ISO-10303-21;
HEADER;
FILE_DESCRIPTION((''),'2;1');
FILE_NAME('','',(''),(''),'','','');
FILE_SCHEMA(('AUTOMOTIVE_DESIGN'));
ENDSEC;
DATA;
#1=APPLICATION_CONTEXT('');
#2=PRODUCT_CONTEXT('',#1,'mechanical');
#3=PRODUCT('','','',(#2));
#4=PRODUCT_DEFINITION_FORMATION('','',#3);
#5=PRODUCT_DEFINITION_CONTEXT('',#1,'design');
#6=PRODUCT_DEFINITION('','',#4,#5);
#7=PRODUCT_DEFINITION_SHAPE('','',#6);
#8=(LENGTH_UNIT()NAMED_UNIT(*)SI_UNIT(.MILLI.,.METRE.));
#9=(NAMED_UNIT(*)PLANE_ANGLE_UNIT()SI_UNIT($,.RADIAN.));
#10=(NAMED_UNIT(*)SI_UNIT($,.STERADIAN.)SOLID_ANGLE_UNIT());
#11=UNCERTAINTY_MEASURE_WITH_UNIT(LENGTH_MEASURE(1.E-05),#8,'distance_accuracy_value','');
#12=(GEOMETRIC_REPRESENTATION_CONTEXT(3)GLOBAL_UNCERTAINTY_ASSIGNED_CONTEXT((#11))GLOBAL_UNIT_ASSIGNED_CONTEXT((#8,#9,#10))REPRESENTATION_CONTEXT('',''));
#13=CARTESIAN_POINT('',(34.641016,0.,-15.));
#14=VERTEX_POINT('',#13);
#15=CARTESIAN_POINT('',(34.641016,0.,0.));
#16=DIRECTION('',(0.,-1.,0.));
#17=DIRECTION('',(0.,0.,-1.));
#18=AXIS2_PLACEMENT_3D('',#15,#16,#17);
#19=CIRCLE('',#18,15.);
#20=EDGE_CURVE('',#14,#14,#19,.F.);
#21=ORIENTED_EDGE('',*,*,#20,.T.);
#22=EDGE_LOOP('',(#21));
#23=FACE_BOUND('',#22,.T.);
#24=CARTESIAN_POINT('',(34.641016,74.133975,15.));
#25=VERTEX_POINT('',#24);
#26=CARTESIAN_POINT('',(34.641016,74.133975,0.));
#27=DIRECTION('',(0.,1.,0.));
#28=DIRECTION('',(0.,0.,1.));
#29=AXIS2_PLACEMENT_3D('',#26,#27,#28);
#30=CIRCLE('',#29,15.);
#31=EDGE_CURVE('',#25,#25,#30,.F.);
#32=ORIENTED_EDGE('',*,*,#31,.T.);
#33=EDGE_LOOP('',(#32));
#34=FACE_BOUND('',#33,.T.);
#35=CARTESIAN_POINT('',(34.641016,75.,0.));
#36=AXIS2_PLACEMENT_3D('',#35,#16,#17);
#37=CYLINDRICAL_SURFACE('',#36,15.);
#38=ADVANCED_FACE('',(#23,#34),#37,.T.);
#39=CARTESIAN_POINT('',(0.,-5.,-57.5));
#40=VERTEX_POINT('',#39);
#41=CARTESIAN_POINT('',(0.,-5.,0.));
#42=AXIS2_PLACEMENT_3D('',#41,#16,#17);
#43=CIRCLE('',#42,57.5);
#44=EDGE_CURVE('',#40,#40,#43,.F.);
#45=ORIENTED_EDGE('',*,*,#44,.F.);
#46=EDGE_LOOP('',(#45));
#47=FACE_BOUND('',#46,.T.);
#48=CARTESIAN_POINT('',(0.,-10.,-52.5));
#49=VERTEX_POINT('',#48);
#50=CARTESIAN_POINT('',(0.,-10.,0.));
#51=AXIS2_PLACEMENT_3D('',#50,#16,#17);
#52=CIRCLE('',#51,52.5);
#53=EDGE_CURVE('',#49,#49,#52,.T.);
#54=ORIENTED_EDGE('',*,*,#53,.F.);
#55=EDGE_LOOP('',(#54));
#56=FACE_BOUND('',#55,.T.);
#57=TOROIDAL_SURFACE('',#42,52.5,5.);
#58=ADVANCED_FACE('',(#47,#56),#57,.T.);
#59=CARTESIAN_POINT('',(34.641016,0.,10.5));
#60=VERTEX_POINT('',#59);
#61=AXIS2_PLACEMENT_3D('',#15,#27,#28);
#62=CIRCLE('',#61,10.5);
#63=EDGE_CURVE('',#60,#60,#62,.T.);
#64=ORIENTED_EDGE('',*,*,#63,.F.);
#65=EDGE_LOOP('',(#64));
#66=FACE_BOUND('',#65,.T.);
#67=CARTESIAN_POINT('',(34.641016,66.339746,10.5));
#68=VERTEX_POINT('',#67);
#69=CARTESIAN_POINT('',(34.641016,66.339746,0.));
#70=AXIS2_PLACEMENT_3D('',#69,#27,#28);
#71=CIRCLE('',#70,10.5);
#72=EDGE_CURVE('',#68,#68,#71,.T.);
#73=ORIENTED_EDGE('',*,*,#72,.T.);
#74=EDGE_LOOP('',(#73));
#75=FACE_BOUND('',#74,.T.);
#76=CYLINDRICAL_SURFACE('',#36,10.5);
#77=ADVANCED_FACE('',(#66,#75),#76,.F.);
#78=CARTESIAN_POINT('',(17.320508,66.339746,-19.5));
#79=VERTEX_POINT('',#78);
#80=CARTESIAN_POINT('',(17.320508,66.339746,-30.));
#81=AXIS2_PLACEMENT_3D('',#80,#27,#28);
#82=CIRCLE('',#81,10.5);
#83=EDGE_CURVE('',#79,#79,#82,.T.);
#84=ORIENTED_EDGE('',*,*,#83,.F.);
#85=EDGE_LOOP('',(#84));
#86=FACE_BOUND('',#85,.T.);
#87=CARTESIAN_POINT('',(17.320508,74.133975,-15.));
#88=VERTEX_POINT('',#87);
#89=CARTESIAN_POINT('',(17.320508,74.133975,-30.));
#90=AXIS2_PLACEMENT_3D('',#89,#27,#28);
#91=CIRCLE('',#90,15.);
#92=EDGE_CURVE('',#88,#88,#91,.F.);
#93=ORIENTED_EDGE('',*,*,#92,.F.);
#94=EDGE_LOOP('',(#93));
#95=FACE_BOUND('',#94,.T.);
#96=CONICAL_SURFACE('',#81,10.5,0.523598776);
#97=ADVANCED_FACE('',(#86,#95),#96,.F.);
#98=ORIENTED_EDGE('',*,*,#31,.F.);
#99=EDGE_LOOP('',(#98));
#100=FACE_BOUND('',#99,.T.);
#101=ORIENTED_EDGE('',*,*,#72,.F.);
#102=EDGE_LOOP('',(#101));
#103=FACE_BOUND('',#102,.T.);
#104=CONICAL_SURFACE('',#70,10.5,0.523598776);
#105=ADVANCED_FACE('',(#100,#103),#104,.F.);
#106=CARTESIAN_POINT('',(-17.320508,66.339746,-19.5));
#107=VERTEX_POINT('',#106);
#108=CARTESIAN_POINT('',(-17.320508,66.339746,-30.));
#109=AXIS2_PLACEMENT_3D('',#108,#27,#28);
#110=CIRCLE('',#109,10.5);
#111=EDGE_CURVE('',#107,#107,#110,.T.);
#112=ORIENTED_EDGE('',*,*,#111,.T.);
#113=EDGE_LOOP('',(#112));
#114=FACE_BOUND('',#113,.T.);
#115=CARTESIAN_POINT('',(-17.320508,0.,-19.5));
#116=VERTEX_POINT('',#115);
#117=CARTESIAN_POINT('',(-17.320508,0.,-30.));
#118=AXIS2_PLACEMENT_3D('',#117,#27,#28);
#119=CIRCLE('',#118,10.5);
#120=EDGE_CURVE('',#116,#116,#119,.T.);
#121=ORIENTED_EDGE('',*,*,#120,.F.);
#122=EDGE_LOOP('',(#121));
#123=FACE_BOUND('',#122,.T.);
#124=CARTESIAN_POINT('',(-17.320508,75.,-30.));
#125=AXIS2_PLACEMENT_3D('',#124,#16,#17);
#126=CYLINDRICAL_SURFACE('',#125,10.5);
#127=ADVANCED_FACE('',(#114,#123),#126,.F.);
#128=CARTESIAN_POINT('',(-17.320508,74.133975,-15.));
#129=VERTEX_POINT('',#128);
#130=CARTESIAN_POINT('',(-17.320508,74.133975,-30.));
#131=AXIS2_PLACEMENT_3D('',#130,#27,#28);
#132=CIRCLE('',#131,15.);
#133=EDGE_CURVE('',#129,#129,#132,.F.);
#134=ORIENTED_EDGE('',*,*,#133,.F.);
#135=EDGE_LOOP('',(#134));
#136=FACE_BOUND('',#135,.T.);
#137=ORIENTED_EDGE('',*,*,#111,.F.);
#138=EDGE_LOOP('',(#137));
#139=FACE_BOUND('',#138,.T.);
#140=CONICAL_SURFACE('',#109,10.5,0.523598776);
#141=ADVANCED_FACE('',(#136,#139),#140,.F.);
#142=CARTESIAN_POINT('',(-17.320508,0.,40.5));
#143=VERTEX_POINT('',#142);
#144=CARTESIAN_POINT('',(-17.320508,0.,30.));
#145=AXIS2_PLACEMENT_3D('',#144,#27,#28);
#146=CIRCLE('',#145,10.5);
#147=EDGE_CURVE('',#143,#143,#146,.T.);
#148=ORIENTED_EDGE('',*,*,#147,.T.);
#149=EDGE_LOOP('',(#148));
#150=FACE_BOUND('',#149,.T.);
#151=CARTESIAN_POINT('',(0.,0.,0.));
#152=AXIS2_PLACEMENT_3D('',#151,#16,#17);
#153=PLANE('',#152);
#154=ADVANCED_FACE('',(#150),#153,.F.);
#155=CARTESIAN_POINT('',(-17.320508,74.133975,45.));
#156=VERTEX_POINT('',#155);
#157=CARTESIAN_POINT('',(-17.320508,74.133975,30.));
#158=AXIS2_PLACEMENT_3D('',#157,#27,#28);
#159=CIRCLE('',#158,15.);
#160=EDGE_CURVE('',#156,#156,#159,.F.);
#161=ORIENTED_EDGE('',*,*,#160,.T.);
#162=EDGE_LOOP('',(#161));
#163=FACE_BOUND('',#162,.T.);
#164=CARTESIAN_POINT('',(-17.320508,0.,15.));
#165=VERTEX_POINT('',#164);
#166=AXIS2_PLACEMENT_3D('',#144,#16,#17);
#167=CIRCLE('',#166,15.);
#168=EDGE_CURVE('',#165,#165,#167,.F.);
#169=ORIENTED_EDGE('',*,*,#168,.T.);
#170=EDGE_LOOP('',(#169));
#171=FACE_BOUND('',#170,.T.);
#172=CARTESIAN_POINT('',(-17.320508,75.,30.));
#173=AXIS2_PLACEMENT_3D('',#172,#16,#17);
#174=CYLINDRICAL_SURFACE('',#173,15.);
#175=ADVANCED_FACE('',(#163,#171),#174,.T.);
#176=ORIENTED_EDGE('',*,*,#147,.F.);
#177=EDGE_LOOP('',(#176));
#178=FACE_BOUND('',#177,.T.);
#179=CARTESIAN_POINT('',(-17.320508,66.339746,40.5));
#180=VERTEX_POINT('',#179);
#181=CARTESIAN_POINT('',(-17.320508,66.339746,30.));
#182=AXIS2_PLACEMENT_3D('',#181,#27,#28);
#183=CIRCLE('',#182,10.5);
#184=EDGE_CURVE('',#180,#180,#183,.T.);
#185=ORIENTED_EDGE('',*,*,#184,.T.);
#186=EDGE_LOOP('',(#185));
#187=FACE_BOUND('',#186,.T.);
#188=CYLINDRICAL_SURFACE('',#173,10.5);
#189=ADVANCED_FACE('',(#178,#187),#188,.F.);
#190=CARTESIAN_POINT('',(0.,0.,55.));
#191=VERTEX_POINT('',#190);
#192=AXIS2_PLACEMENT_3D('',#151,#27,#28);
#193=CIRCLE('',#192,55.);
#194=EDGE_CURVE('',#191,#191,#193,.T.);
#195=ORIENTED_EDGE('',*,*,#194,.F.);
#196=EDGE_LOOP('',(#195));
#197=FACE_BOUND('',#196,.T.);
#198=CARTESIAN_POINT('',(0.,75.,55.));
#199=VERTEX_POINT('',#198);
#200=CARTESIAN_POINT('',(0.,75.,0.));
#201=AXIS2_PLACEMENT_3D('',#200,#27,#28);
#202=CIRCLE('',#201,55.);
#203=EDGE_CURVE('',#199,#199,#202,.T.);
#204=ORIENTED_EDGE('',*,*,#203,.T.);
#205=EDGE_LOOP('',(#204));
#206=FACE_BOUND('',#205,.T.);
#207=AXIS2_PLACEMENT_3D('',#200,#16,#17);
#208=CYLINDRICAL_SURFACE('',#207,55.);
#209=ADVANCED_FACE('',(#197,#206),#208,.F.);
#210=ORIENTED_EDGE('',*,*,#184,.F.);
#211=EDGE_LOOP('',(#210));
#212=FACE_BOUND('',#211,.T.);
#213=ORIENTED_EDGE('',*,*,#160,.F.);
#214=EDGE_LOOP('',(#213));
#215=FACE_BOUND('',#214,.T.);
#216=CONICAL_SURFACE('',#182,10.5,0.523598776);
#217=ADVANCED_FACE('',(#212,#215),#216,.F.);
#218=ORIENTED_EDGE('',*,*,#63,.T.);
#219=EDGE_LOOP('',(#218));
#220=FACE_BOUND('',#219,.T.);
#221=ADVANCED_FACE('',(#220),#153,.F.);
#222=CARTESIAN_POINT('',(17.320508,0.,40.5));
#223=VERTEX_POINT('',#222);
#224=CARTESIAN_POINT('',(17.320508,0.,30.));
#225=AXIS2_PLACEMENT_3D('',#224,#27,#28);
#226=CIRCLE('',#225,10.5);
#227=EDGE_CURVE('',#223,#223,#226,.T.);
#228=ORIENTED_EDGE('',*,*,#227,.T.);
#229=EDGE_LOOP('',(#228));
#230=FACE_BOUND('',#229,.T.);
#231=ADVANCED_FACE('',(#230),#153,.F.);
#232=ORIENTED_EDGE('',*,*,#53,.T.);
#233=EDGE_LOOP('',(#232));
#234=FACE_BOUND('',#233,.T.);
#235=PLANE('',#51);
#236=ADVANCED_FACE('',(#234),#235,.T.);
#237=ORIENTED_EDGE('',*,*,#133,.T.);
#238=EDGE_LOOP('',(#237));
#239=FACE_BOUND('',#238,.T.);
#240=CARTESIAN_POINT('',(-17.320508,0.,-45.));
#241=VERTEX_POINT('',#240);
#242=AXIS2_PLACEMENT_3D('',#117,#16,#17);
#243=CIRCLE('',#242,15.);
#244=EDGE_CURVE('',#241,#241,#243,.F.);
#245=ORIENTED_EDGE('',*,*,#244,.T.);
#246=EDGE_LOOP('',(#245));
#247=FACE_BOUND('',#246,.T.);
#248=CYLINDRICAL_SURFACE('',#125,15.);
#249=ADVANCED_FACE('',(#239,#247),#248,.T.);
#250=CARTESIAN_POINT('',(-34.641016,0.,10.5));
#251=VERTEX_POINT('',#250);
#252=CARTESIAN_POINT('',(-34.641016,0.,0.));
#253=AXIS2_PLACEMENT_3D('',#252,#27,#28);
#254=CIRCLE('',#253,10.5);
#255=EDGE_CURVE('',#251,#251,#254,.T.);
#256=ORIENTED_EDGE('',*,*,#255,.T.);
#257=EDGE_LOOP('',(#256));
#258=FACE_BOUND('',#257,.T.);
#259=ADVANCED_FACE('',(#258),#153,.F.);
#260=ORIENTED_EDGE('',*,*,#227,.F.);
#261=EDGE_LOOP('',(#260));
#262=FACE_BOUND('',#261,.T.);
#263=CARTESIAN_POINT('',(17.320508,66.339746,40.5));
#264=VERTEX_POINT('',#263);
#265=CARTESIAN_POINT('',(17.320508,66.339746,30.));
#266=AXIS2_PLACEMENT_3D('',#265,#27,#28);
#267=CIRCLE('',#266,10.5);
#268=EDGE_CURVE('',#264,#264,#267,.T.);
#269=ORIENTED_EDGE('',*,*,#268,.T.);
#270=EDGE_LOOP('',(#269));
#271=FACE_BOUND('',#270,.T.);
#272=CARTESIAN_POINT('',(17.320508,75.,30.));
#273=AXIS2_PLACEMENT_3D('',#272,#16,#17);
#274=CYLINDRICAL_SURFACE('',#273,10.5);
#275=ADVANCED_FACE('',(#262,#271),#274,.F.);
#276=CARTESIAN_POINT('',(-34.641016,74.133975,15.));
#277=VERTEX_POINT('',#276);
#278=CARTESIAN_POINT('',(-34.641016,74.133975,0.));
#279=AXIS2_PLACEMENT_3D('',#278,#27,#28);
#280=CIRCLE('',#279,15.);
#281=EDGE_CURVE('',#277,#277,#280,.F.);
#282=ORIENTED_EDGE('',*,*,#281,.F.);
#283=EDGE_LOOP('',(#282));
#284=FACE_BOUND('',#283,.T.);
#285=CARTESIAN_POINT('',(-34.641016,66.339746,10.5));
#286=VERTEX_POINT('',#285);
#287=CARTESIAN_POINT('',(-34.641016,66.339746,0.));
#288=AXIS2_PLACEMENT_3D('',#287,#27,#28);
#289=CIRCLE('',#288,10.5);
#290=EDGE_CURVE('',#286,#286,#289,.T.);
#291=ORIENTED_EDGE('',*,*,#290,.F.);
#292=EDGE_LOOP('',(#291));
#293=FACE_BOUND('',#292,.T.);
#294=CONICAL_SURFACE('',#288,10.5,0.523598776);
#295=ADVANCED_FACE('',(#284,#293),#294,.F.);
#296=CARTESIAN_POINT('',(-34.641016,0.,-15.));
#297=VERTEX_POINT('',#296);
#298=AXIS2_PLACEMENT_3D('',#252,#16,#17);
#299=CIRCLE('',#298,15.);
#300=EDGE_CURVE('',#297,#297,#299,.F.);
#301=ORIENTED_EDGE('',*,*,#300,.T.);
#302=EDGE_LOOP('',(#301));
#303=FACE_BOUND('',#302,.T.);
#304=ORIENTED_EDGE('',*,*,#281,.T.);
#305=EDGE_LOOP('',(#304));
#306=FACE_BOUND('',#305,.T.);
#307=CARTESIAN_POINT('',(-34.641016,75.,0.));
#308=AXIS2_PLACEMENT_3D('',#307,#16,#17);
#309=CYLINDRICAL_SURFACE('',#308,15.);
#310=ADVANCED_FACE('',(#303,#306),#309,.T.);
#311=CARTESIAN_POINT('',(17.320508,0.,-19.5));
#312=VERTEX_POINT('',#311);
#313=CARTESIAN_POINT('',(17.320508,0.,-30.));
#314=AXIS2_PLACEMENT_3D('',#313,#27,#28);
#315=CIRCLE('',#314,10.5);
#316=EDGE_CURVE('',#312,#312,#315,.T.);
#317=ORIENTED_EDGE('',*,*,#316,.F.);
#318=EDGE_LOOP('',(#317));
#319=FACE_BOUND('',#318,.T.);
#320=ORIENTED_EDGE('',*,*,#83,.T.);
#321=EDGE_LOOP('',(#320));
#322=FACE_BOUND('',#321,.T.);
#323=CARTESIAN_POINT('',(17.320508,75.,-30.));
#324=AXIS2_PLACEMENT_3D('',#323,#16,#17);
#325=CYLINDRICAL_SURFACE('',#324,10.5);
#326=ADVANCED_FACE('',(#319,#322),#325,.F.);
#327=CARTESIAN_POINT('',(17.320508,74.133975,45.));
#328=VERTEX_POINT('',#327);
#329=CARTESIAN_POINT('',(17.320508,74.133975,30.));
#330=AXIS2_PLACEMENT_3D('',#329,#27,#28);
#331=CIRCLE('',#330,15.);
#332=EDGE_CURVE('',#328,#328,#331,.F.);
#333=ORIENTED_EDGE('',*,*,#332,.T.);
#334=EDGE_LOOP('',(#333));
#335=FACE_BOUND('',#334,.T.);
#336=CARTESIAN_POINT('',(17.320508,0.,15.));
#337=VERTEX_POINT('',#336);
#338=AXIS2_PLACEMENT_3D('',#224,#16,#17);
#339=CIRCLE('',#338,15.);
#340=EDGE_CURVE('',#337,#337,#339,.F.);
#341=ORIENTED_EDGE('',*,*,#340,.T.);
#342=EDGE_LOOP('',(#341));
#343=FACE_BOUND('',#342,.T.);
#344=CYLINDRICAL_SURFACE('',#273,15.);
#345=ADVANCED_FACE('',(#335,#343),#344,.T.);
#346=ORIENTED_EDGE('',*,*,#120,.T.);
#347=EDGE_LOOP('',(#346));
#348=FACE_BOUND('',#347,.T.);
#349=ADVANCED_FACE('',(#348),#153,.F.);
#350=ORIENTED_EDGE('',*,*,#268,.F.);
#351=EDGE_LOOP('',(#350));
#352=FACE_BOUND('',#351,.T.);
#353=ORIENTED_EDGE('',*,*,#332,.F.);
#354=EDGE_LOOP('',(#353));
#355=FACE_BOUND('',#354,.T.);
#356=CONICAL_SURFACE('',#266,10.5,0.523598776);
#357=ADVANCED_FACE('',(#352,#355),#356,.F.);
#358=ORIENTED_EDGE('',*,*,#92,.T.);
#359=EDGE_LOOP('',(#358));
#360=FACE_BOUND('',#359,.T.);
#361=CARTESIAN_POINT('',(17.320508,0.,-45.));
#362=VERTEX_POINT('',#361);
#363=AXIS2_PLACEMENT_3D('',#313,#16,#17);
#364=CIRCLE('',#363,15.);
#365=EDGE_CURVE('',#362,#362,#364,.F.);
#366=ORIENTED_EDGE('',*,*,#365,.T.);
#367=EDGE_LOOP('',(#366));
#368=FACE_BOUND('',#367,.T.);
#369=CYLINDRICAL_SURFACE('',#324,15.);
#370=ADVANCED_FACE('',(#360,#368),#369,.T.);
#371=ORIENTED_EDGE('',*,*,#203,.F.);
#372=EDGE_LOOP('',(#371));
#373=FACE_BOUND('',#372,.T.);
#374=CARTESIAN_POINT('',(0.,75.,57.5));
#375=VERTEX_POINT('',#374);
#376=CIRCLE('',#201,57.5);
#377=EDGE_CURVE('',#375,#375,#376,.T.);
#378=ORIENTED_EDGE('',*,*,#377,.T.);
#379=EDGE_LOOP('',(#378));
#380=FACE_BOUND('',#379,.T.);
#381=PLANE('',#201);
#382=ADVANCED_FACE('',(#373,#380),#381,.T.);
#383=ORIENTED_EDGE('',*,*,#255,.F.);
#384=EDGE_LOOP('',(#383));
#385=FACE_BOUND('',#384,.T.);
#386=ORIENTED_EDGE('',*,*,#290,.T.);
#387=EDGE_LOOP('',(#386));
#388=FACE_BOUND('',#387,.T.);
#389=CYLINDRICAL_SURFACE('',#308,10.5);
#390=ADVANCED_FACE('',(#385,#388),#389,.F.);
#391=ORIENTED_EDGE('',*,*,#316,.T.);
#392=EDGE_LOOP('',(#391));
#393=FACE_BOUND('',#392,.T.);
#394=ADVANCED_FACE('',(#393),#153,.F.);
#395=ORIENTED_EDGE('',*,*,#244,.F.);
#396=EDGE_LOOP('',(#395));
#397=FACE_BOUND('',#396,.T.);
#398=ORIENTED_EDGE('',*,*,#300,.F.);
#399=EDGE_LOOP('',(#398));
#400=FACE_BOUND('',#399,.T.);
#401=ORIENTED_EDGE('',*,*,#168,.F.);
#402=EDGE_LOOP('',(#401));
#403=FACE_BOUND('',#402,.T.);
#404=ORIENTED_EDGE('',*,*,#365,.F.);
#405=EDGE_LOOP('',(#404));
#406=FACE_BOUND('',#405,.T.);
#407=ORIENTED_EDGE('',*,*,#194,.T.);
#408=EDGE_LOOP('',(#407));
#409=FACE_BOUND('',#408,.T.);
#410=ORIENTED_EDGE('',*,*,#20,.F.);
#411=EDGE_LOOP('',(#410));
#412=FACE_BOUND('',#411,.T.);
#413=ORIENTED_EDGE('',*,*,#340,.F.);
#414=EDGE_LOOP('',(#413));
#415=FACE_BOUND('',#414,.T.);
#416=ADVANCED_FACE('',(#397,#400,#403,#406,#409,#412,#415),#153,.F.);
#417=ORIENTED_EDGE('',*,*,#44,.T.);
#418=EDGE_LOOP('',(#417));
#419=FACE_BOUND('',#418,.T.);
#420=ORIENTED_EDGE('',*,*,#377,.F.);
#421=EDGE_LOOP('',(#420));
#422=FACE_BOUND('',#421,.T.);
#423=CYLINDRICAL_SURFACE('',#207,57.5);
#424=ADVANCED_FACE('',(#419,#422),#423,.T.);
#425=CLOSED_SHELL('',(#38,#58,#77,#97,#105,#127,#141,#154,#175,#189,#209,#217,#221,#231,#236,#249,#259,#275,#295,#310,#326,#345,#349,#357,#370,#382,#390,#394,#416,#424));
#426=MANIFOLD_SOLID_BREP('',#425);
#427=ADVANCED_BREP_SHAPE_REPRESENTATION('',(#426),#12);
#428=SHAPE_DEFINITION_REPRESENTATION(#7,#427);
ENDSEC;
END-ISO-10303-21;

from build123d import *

# Parameters (mm, degrees)
SKETCH2_R             = 15
SKETCH2_R_2           = 10.5
BOSS_EXTRUDE1_DEPTH   = 75
BOSS_EXTRUDE1_2_DEPTH = 75
BOSS_EXTRUDE1_3_DEPTH = 75
BOSS_EXTRUDE1_4_DEPTH = 75
BOSS_EXTRUDE1_5_DEPTH = 75
BOSS_EXTRUDE1_6_DEPTH = 75
SKETCH2_R_3           = 57.5
SKETCH2_R_4           = 55
BOSS_EXTRUDE1_7_DEPTH = 75
SKETCH3_R             = 57.5
BOSS_EXTRUDE2_DEPTH   = 10
CHAMFER2_SIZE         = 5
CHAMFER2_SIZE_2       = 8.660254038
FILLET1_R             = 5


with BuildPart() as part:
    # Sketch2 → Boss-Extrude1 (new body)
    with BuildSketch(Plane(origin=(0, 0, 0), x_dir=(1, 0, 0), z_dir=(0, 1, 0))):
        with Locations(Location((-34.641016151, 0, 0), (0, 0, 270))):
            Circle(SKETCH2_R)
        with Locations(Location((-34.641016151, 0, 0), (0, 0, 270))):
            Circle(SKETCH2_R_2, mode=Mode.SUBTRACT)
    extrude(amount=BOSS_EXTRUDE1_DEPTH)



with BuildPart() as body_2:
    # Sketch2 → Boss-Extrude1 2 (new body)
    with BuildSketch(Plane(origin=(0, 0, 0), x_dir=(1, 0, 0), z_dir=(0, 1, 0))):
        with Locations(Location((-17.320508076, 30, 0), (0, 0, 270))):
            Circle(SKETCH2_R)
        with Locations(Location((-17.320508076, 30, 0), (0, 0, 270))):
            Circle(SKETCH2_R_2, mode=Mode.SUBTRACT)
    extrude(amount=BOSS_EXTRUDE1_2_DEPTH)


with BuildPart() as body_3:
    # Sketch2 → Boss-Extrude1 3 (new body)
    with BuildSketch(Plane(origin=(0, 0, 0), x_dir=(1, 0, 0), z_dir=(0, 1, 0))):
        with Locations(Location((17.320508076, 30, 0), (0, 0, 270))):
            Circle(SKETCH2_R)
        with Locations(Location((17.320508076, 30, 0), (0, 0, 270))):
            Circle(SKETCH2_R_2, mode=Mode.SUBTRACT)
    extrude(amount=BOSS_EXTRUDE1_3_DEPTH)


with BuildPart() as body_4:
    # Sketch2 → Boss-Extrude1 4 (new body)
    with BuildSketch(Plane(origin=(0, 0, 0), x_dir=(1, 0, 0), z_dir=(0, 1, 0))):
        with Locations(Location((34.641016151, 0, 0), (0, 0, 270))):
            Circle(SKETCH2_R)
        with Locations(Location((34.641016151, 0, 0), (0, 0, 270))):
            Circle(SKETCH2_R_2, mode=Mode.SUBTRACT)
    extrude(amount=BOSS_EXTRUDE1_4_DEPTH)


with BuildPart() as body_5:
    # Sketch2 → Boss-Extrude1 5 (new body)
    with BuildSketch(Plane(origin=(0, 0, 0), x_dir=(1, 0, 0), z_dir=(0, 1, 0))):
        with Locations(Location((17.320508076, -30, 0), (0, 0, 270))):
            Circle(SKETCH2_R)
        with Locations(Location((17.320508076, -30, 0), (0, 0, 270))):
            Circle(SKETCH2_R_2, mode=Mode.SUBTRACT)
    extrude(amount=BOSS_EXTRUDE1_5_DEPTH)


with BuildPart() as body_6:
    # Sketch2 → Boss-Extrude1 6 (new body)
    with BuildSketch(Plane(origin=(0, 0, 0), x_dir=(1, 0, 0), z_dir=(0, 1, 0))):
        with Locations(Location((-17.320508076, -30, 0), (0, 0, 270))):
            Circle(SKETCH2_R)
        with Locations(Location((-17.320508076, -30, 0), (0, 0, 270))):
            Circle(SKETCH2_R_2, mode=Mode.SUBTRACT)
    extrude(amount=BOSS_EXTRUDE1_6_DEPTH)


with BuildPart() as body_7:
    # Sketch2 → Boss-Extrude1 7 (new body)
    with BuildSketch(Plane(origin=(0, 0, 0), x_dir=(1, 0, 0), z_dir=(0, 1, 0))):
        with Locations(Location((0, 0, 0), (0, 0, 270))):
            Circle(SKETCH2_R_3)
        with Locations(Location((0, 0, 0), (0, 0, 270))):
            Circle(SKETCH2_R_4, mode=Mode.SUBTRACT)
    extrude(amount=BOSS_EXTRUDE1_7_DEPTH)


with BuildPart() as part_1:
    add(part.part)

    add(body_2.part)  # Boss-Extrude2 merges body 2

    add(body_3.part)  # Boss-Extrude2 merges body 3

    add(body_4.part)  # Boss-Extrude2 merges body 4

    add(body_5.part)  # Boss-Extrude2 merges body 5

    add(body_6.part)  # Boss-Extrude2 merges body 6

    add(body_7.part)  # Boss-Extrude2 merges body 7
    # Sketch3 → Boss-Extrude2 (add)
    with BuildSketch(Plane.XZ):
        with Locations(Location((0, 0, 0), (0, 0, 270))):
            Circle(SKETCH3_R)
    extrude(amount=BOSS_EXTRUDE2_DEPTH)

    # Chamfer2
    # the kernel refuses this chamfer: 8.660254038, 5 mm, written as the material it takes off along each edge
    with BuildSketch(Plane(origin=(-17.320508076, 75, -30), x_dir=(0, 0, 1), z_dir=(-1, 0, 0))) as chamfer2_piece_1:
        Polygon((10.5 + CHAMFER2_SIZE, 0), (10.5, -CHAMFER2_SIZE_2), (10.5, 0), align=None)
    revolve(axis=Axis((-17.320508076, 75, -30), (0, 1, 0)), mode=Mode.SUBTRACT)
    with BuildSketch(Plane(origin=(-34.641016151, 75, 0), x_dir=(0, 0, 1), z_dir=(-1, 0, 0))) as chamfer2_piece_2:
        Polygon((10.5 + CHAMFER2_SIZE, 0), (10.5, -CHAMFER2_SIZE_2), (10.5, 0), align=None)
    revolve(axis=Axis((-34.641016151, 75, 0), (0, 1, 0)), mode=Mode.SUBTRACT)
    with BuildSketch(Plane(origin=(-17.320508076, 75, 30), x_dir=(0, 0, 1), z_dir=(-1, 0, 0))) as chamfer2_piece_3:
        Polygon((10.5 + CHAMFER2_SIZE, 0), (10.5, -CHAMFER2_SIZE_2), (10.5, 0), align=None)
    revolve(axis=Axis((-17.320508076, 75, 30), (0, 1, 0)), mode=Mode.SUBTRACT)
    with BuildSketch(Plane(origin=(17.320508076, 75, 30), x_dir=(0, 0, 1), z_dir=(-1, 0, 0))) as chamfer2_piece_4:
        Polygon((10.5 + CHAMFER2_SIZE, 0), (10.5, -CHAMFER2_SIZE_2), (10.5, 0), align=None)
    revolve(axis=Axis((17.320508076, 75, 30), (0, 1, 0)), mode=Mode.SUBTRACT)
    with BuildSketch(Plane(origin=(34.641016151, 75, 0), x_dir=(0, 0, 1), z_dir=(-1, 0, 0))) as chamfer2_piece_5:
        Polygon((10.5 + CHAMFER2_SIZE, 0), (10.5, -CHAMFER2_SIZE_2), (10.5, 0), align=None)
    revolve(axis=Axis((34.641016151, 75, 0), (0, 1, 0)), mode=Mode.SUBTRACT)
    with BuildSketch(Plane(origin=(17.320508076, 75, -30), x_dir=(0, 0, 1), z_dir=(-1, 0, 0))) as chamfer2_piece_6:
        Polygon((10.5 + CHAMFER2_SIZE, 0), (10.5, -CHAMFER2_SIZE_2), (10.5, 0), align=None)
    revolve(axis=Axis((17.320508076, 75, -30), (0, 1, 0)), mode=Mode.SUBTRACT)

    # Fillet1
    fillet1_edges = [part_1.edges().sort_by_distance(p)[0] for p in [
        (0, -10, 57.5),
    ]]
    fillet(fillet1_edges, radius=FILLET1_R)


solid = part_1.part
